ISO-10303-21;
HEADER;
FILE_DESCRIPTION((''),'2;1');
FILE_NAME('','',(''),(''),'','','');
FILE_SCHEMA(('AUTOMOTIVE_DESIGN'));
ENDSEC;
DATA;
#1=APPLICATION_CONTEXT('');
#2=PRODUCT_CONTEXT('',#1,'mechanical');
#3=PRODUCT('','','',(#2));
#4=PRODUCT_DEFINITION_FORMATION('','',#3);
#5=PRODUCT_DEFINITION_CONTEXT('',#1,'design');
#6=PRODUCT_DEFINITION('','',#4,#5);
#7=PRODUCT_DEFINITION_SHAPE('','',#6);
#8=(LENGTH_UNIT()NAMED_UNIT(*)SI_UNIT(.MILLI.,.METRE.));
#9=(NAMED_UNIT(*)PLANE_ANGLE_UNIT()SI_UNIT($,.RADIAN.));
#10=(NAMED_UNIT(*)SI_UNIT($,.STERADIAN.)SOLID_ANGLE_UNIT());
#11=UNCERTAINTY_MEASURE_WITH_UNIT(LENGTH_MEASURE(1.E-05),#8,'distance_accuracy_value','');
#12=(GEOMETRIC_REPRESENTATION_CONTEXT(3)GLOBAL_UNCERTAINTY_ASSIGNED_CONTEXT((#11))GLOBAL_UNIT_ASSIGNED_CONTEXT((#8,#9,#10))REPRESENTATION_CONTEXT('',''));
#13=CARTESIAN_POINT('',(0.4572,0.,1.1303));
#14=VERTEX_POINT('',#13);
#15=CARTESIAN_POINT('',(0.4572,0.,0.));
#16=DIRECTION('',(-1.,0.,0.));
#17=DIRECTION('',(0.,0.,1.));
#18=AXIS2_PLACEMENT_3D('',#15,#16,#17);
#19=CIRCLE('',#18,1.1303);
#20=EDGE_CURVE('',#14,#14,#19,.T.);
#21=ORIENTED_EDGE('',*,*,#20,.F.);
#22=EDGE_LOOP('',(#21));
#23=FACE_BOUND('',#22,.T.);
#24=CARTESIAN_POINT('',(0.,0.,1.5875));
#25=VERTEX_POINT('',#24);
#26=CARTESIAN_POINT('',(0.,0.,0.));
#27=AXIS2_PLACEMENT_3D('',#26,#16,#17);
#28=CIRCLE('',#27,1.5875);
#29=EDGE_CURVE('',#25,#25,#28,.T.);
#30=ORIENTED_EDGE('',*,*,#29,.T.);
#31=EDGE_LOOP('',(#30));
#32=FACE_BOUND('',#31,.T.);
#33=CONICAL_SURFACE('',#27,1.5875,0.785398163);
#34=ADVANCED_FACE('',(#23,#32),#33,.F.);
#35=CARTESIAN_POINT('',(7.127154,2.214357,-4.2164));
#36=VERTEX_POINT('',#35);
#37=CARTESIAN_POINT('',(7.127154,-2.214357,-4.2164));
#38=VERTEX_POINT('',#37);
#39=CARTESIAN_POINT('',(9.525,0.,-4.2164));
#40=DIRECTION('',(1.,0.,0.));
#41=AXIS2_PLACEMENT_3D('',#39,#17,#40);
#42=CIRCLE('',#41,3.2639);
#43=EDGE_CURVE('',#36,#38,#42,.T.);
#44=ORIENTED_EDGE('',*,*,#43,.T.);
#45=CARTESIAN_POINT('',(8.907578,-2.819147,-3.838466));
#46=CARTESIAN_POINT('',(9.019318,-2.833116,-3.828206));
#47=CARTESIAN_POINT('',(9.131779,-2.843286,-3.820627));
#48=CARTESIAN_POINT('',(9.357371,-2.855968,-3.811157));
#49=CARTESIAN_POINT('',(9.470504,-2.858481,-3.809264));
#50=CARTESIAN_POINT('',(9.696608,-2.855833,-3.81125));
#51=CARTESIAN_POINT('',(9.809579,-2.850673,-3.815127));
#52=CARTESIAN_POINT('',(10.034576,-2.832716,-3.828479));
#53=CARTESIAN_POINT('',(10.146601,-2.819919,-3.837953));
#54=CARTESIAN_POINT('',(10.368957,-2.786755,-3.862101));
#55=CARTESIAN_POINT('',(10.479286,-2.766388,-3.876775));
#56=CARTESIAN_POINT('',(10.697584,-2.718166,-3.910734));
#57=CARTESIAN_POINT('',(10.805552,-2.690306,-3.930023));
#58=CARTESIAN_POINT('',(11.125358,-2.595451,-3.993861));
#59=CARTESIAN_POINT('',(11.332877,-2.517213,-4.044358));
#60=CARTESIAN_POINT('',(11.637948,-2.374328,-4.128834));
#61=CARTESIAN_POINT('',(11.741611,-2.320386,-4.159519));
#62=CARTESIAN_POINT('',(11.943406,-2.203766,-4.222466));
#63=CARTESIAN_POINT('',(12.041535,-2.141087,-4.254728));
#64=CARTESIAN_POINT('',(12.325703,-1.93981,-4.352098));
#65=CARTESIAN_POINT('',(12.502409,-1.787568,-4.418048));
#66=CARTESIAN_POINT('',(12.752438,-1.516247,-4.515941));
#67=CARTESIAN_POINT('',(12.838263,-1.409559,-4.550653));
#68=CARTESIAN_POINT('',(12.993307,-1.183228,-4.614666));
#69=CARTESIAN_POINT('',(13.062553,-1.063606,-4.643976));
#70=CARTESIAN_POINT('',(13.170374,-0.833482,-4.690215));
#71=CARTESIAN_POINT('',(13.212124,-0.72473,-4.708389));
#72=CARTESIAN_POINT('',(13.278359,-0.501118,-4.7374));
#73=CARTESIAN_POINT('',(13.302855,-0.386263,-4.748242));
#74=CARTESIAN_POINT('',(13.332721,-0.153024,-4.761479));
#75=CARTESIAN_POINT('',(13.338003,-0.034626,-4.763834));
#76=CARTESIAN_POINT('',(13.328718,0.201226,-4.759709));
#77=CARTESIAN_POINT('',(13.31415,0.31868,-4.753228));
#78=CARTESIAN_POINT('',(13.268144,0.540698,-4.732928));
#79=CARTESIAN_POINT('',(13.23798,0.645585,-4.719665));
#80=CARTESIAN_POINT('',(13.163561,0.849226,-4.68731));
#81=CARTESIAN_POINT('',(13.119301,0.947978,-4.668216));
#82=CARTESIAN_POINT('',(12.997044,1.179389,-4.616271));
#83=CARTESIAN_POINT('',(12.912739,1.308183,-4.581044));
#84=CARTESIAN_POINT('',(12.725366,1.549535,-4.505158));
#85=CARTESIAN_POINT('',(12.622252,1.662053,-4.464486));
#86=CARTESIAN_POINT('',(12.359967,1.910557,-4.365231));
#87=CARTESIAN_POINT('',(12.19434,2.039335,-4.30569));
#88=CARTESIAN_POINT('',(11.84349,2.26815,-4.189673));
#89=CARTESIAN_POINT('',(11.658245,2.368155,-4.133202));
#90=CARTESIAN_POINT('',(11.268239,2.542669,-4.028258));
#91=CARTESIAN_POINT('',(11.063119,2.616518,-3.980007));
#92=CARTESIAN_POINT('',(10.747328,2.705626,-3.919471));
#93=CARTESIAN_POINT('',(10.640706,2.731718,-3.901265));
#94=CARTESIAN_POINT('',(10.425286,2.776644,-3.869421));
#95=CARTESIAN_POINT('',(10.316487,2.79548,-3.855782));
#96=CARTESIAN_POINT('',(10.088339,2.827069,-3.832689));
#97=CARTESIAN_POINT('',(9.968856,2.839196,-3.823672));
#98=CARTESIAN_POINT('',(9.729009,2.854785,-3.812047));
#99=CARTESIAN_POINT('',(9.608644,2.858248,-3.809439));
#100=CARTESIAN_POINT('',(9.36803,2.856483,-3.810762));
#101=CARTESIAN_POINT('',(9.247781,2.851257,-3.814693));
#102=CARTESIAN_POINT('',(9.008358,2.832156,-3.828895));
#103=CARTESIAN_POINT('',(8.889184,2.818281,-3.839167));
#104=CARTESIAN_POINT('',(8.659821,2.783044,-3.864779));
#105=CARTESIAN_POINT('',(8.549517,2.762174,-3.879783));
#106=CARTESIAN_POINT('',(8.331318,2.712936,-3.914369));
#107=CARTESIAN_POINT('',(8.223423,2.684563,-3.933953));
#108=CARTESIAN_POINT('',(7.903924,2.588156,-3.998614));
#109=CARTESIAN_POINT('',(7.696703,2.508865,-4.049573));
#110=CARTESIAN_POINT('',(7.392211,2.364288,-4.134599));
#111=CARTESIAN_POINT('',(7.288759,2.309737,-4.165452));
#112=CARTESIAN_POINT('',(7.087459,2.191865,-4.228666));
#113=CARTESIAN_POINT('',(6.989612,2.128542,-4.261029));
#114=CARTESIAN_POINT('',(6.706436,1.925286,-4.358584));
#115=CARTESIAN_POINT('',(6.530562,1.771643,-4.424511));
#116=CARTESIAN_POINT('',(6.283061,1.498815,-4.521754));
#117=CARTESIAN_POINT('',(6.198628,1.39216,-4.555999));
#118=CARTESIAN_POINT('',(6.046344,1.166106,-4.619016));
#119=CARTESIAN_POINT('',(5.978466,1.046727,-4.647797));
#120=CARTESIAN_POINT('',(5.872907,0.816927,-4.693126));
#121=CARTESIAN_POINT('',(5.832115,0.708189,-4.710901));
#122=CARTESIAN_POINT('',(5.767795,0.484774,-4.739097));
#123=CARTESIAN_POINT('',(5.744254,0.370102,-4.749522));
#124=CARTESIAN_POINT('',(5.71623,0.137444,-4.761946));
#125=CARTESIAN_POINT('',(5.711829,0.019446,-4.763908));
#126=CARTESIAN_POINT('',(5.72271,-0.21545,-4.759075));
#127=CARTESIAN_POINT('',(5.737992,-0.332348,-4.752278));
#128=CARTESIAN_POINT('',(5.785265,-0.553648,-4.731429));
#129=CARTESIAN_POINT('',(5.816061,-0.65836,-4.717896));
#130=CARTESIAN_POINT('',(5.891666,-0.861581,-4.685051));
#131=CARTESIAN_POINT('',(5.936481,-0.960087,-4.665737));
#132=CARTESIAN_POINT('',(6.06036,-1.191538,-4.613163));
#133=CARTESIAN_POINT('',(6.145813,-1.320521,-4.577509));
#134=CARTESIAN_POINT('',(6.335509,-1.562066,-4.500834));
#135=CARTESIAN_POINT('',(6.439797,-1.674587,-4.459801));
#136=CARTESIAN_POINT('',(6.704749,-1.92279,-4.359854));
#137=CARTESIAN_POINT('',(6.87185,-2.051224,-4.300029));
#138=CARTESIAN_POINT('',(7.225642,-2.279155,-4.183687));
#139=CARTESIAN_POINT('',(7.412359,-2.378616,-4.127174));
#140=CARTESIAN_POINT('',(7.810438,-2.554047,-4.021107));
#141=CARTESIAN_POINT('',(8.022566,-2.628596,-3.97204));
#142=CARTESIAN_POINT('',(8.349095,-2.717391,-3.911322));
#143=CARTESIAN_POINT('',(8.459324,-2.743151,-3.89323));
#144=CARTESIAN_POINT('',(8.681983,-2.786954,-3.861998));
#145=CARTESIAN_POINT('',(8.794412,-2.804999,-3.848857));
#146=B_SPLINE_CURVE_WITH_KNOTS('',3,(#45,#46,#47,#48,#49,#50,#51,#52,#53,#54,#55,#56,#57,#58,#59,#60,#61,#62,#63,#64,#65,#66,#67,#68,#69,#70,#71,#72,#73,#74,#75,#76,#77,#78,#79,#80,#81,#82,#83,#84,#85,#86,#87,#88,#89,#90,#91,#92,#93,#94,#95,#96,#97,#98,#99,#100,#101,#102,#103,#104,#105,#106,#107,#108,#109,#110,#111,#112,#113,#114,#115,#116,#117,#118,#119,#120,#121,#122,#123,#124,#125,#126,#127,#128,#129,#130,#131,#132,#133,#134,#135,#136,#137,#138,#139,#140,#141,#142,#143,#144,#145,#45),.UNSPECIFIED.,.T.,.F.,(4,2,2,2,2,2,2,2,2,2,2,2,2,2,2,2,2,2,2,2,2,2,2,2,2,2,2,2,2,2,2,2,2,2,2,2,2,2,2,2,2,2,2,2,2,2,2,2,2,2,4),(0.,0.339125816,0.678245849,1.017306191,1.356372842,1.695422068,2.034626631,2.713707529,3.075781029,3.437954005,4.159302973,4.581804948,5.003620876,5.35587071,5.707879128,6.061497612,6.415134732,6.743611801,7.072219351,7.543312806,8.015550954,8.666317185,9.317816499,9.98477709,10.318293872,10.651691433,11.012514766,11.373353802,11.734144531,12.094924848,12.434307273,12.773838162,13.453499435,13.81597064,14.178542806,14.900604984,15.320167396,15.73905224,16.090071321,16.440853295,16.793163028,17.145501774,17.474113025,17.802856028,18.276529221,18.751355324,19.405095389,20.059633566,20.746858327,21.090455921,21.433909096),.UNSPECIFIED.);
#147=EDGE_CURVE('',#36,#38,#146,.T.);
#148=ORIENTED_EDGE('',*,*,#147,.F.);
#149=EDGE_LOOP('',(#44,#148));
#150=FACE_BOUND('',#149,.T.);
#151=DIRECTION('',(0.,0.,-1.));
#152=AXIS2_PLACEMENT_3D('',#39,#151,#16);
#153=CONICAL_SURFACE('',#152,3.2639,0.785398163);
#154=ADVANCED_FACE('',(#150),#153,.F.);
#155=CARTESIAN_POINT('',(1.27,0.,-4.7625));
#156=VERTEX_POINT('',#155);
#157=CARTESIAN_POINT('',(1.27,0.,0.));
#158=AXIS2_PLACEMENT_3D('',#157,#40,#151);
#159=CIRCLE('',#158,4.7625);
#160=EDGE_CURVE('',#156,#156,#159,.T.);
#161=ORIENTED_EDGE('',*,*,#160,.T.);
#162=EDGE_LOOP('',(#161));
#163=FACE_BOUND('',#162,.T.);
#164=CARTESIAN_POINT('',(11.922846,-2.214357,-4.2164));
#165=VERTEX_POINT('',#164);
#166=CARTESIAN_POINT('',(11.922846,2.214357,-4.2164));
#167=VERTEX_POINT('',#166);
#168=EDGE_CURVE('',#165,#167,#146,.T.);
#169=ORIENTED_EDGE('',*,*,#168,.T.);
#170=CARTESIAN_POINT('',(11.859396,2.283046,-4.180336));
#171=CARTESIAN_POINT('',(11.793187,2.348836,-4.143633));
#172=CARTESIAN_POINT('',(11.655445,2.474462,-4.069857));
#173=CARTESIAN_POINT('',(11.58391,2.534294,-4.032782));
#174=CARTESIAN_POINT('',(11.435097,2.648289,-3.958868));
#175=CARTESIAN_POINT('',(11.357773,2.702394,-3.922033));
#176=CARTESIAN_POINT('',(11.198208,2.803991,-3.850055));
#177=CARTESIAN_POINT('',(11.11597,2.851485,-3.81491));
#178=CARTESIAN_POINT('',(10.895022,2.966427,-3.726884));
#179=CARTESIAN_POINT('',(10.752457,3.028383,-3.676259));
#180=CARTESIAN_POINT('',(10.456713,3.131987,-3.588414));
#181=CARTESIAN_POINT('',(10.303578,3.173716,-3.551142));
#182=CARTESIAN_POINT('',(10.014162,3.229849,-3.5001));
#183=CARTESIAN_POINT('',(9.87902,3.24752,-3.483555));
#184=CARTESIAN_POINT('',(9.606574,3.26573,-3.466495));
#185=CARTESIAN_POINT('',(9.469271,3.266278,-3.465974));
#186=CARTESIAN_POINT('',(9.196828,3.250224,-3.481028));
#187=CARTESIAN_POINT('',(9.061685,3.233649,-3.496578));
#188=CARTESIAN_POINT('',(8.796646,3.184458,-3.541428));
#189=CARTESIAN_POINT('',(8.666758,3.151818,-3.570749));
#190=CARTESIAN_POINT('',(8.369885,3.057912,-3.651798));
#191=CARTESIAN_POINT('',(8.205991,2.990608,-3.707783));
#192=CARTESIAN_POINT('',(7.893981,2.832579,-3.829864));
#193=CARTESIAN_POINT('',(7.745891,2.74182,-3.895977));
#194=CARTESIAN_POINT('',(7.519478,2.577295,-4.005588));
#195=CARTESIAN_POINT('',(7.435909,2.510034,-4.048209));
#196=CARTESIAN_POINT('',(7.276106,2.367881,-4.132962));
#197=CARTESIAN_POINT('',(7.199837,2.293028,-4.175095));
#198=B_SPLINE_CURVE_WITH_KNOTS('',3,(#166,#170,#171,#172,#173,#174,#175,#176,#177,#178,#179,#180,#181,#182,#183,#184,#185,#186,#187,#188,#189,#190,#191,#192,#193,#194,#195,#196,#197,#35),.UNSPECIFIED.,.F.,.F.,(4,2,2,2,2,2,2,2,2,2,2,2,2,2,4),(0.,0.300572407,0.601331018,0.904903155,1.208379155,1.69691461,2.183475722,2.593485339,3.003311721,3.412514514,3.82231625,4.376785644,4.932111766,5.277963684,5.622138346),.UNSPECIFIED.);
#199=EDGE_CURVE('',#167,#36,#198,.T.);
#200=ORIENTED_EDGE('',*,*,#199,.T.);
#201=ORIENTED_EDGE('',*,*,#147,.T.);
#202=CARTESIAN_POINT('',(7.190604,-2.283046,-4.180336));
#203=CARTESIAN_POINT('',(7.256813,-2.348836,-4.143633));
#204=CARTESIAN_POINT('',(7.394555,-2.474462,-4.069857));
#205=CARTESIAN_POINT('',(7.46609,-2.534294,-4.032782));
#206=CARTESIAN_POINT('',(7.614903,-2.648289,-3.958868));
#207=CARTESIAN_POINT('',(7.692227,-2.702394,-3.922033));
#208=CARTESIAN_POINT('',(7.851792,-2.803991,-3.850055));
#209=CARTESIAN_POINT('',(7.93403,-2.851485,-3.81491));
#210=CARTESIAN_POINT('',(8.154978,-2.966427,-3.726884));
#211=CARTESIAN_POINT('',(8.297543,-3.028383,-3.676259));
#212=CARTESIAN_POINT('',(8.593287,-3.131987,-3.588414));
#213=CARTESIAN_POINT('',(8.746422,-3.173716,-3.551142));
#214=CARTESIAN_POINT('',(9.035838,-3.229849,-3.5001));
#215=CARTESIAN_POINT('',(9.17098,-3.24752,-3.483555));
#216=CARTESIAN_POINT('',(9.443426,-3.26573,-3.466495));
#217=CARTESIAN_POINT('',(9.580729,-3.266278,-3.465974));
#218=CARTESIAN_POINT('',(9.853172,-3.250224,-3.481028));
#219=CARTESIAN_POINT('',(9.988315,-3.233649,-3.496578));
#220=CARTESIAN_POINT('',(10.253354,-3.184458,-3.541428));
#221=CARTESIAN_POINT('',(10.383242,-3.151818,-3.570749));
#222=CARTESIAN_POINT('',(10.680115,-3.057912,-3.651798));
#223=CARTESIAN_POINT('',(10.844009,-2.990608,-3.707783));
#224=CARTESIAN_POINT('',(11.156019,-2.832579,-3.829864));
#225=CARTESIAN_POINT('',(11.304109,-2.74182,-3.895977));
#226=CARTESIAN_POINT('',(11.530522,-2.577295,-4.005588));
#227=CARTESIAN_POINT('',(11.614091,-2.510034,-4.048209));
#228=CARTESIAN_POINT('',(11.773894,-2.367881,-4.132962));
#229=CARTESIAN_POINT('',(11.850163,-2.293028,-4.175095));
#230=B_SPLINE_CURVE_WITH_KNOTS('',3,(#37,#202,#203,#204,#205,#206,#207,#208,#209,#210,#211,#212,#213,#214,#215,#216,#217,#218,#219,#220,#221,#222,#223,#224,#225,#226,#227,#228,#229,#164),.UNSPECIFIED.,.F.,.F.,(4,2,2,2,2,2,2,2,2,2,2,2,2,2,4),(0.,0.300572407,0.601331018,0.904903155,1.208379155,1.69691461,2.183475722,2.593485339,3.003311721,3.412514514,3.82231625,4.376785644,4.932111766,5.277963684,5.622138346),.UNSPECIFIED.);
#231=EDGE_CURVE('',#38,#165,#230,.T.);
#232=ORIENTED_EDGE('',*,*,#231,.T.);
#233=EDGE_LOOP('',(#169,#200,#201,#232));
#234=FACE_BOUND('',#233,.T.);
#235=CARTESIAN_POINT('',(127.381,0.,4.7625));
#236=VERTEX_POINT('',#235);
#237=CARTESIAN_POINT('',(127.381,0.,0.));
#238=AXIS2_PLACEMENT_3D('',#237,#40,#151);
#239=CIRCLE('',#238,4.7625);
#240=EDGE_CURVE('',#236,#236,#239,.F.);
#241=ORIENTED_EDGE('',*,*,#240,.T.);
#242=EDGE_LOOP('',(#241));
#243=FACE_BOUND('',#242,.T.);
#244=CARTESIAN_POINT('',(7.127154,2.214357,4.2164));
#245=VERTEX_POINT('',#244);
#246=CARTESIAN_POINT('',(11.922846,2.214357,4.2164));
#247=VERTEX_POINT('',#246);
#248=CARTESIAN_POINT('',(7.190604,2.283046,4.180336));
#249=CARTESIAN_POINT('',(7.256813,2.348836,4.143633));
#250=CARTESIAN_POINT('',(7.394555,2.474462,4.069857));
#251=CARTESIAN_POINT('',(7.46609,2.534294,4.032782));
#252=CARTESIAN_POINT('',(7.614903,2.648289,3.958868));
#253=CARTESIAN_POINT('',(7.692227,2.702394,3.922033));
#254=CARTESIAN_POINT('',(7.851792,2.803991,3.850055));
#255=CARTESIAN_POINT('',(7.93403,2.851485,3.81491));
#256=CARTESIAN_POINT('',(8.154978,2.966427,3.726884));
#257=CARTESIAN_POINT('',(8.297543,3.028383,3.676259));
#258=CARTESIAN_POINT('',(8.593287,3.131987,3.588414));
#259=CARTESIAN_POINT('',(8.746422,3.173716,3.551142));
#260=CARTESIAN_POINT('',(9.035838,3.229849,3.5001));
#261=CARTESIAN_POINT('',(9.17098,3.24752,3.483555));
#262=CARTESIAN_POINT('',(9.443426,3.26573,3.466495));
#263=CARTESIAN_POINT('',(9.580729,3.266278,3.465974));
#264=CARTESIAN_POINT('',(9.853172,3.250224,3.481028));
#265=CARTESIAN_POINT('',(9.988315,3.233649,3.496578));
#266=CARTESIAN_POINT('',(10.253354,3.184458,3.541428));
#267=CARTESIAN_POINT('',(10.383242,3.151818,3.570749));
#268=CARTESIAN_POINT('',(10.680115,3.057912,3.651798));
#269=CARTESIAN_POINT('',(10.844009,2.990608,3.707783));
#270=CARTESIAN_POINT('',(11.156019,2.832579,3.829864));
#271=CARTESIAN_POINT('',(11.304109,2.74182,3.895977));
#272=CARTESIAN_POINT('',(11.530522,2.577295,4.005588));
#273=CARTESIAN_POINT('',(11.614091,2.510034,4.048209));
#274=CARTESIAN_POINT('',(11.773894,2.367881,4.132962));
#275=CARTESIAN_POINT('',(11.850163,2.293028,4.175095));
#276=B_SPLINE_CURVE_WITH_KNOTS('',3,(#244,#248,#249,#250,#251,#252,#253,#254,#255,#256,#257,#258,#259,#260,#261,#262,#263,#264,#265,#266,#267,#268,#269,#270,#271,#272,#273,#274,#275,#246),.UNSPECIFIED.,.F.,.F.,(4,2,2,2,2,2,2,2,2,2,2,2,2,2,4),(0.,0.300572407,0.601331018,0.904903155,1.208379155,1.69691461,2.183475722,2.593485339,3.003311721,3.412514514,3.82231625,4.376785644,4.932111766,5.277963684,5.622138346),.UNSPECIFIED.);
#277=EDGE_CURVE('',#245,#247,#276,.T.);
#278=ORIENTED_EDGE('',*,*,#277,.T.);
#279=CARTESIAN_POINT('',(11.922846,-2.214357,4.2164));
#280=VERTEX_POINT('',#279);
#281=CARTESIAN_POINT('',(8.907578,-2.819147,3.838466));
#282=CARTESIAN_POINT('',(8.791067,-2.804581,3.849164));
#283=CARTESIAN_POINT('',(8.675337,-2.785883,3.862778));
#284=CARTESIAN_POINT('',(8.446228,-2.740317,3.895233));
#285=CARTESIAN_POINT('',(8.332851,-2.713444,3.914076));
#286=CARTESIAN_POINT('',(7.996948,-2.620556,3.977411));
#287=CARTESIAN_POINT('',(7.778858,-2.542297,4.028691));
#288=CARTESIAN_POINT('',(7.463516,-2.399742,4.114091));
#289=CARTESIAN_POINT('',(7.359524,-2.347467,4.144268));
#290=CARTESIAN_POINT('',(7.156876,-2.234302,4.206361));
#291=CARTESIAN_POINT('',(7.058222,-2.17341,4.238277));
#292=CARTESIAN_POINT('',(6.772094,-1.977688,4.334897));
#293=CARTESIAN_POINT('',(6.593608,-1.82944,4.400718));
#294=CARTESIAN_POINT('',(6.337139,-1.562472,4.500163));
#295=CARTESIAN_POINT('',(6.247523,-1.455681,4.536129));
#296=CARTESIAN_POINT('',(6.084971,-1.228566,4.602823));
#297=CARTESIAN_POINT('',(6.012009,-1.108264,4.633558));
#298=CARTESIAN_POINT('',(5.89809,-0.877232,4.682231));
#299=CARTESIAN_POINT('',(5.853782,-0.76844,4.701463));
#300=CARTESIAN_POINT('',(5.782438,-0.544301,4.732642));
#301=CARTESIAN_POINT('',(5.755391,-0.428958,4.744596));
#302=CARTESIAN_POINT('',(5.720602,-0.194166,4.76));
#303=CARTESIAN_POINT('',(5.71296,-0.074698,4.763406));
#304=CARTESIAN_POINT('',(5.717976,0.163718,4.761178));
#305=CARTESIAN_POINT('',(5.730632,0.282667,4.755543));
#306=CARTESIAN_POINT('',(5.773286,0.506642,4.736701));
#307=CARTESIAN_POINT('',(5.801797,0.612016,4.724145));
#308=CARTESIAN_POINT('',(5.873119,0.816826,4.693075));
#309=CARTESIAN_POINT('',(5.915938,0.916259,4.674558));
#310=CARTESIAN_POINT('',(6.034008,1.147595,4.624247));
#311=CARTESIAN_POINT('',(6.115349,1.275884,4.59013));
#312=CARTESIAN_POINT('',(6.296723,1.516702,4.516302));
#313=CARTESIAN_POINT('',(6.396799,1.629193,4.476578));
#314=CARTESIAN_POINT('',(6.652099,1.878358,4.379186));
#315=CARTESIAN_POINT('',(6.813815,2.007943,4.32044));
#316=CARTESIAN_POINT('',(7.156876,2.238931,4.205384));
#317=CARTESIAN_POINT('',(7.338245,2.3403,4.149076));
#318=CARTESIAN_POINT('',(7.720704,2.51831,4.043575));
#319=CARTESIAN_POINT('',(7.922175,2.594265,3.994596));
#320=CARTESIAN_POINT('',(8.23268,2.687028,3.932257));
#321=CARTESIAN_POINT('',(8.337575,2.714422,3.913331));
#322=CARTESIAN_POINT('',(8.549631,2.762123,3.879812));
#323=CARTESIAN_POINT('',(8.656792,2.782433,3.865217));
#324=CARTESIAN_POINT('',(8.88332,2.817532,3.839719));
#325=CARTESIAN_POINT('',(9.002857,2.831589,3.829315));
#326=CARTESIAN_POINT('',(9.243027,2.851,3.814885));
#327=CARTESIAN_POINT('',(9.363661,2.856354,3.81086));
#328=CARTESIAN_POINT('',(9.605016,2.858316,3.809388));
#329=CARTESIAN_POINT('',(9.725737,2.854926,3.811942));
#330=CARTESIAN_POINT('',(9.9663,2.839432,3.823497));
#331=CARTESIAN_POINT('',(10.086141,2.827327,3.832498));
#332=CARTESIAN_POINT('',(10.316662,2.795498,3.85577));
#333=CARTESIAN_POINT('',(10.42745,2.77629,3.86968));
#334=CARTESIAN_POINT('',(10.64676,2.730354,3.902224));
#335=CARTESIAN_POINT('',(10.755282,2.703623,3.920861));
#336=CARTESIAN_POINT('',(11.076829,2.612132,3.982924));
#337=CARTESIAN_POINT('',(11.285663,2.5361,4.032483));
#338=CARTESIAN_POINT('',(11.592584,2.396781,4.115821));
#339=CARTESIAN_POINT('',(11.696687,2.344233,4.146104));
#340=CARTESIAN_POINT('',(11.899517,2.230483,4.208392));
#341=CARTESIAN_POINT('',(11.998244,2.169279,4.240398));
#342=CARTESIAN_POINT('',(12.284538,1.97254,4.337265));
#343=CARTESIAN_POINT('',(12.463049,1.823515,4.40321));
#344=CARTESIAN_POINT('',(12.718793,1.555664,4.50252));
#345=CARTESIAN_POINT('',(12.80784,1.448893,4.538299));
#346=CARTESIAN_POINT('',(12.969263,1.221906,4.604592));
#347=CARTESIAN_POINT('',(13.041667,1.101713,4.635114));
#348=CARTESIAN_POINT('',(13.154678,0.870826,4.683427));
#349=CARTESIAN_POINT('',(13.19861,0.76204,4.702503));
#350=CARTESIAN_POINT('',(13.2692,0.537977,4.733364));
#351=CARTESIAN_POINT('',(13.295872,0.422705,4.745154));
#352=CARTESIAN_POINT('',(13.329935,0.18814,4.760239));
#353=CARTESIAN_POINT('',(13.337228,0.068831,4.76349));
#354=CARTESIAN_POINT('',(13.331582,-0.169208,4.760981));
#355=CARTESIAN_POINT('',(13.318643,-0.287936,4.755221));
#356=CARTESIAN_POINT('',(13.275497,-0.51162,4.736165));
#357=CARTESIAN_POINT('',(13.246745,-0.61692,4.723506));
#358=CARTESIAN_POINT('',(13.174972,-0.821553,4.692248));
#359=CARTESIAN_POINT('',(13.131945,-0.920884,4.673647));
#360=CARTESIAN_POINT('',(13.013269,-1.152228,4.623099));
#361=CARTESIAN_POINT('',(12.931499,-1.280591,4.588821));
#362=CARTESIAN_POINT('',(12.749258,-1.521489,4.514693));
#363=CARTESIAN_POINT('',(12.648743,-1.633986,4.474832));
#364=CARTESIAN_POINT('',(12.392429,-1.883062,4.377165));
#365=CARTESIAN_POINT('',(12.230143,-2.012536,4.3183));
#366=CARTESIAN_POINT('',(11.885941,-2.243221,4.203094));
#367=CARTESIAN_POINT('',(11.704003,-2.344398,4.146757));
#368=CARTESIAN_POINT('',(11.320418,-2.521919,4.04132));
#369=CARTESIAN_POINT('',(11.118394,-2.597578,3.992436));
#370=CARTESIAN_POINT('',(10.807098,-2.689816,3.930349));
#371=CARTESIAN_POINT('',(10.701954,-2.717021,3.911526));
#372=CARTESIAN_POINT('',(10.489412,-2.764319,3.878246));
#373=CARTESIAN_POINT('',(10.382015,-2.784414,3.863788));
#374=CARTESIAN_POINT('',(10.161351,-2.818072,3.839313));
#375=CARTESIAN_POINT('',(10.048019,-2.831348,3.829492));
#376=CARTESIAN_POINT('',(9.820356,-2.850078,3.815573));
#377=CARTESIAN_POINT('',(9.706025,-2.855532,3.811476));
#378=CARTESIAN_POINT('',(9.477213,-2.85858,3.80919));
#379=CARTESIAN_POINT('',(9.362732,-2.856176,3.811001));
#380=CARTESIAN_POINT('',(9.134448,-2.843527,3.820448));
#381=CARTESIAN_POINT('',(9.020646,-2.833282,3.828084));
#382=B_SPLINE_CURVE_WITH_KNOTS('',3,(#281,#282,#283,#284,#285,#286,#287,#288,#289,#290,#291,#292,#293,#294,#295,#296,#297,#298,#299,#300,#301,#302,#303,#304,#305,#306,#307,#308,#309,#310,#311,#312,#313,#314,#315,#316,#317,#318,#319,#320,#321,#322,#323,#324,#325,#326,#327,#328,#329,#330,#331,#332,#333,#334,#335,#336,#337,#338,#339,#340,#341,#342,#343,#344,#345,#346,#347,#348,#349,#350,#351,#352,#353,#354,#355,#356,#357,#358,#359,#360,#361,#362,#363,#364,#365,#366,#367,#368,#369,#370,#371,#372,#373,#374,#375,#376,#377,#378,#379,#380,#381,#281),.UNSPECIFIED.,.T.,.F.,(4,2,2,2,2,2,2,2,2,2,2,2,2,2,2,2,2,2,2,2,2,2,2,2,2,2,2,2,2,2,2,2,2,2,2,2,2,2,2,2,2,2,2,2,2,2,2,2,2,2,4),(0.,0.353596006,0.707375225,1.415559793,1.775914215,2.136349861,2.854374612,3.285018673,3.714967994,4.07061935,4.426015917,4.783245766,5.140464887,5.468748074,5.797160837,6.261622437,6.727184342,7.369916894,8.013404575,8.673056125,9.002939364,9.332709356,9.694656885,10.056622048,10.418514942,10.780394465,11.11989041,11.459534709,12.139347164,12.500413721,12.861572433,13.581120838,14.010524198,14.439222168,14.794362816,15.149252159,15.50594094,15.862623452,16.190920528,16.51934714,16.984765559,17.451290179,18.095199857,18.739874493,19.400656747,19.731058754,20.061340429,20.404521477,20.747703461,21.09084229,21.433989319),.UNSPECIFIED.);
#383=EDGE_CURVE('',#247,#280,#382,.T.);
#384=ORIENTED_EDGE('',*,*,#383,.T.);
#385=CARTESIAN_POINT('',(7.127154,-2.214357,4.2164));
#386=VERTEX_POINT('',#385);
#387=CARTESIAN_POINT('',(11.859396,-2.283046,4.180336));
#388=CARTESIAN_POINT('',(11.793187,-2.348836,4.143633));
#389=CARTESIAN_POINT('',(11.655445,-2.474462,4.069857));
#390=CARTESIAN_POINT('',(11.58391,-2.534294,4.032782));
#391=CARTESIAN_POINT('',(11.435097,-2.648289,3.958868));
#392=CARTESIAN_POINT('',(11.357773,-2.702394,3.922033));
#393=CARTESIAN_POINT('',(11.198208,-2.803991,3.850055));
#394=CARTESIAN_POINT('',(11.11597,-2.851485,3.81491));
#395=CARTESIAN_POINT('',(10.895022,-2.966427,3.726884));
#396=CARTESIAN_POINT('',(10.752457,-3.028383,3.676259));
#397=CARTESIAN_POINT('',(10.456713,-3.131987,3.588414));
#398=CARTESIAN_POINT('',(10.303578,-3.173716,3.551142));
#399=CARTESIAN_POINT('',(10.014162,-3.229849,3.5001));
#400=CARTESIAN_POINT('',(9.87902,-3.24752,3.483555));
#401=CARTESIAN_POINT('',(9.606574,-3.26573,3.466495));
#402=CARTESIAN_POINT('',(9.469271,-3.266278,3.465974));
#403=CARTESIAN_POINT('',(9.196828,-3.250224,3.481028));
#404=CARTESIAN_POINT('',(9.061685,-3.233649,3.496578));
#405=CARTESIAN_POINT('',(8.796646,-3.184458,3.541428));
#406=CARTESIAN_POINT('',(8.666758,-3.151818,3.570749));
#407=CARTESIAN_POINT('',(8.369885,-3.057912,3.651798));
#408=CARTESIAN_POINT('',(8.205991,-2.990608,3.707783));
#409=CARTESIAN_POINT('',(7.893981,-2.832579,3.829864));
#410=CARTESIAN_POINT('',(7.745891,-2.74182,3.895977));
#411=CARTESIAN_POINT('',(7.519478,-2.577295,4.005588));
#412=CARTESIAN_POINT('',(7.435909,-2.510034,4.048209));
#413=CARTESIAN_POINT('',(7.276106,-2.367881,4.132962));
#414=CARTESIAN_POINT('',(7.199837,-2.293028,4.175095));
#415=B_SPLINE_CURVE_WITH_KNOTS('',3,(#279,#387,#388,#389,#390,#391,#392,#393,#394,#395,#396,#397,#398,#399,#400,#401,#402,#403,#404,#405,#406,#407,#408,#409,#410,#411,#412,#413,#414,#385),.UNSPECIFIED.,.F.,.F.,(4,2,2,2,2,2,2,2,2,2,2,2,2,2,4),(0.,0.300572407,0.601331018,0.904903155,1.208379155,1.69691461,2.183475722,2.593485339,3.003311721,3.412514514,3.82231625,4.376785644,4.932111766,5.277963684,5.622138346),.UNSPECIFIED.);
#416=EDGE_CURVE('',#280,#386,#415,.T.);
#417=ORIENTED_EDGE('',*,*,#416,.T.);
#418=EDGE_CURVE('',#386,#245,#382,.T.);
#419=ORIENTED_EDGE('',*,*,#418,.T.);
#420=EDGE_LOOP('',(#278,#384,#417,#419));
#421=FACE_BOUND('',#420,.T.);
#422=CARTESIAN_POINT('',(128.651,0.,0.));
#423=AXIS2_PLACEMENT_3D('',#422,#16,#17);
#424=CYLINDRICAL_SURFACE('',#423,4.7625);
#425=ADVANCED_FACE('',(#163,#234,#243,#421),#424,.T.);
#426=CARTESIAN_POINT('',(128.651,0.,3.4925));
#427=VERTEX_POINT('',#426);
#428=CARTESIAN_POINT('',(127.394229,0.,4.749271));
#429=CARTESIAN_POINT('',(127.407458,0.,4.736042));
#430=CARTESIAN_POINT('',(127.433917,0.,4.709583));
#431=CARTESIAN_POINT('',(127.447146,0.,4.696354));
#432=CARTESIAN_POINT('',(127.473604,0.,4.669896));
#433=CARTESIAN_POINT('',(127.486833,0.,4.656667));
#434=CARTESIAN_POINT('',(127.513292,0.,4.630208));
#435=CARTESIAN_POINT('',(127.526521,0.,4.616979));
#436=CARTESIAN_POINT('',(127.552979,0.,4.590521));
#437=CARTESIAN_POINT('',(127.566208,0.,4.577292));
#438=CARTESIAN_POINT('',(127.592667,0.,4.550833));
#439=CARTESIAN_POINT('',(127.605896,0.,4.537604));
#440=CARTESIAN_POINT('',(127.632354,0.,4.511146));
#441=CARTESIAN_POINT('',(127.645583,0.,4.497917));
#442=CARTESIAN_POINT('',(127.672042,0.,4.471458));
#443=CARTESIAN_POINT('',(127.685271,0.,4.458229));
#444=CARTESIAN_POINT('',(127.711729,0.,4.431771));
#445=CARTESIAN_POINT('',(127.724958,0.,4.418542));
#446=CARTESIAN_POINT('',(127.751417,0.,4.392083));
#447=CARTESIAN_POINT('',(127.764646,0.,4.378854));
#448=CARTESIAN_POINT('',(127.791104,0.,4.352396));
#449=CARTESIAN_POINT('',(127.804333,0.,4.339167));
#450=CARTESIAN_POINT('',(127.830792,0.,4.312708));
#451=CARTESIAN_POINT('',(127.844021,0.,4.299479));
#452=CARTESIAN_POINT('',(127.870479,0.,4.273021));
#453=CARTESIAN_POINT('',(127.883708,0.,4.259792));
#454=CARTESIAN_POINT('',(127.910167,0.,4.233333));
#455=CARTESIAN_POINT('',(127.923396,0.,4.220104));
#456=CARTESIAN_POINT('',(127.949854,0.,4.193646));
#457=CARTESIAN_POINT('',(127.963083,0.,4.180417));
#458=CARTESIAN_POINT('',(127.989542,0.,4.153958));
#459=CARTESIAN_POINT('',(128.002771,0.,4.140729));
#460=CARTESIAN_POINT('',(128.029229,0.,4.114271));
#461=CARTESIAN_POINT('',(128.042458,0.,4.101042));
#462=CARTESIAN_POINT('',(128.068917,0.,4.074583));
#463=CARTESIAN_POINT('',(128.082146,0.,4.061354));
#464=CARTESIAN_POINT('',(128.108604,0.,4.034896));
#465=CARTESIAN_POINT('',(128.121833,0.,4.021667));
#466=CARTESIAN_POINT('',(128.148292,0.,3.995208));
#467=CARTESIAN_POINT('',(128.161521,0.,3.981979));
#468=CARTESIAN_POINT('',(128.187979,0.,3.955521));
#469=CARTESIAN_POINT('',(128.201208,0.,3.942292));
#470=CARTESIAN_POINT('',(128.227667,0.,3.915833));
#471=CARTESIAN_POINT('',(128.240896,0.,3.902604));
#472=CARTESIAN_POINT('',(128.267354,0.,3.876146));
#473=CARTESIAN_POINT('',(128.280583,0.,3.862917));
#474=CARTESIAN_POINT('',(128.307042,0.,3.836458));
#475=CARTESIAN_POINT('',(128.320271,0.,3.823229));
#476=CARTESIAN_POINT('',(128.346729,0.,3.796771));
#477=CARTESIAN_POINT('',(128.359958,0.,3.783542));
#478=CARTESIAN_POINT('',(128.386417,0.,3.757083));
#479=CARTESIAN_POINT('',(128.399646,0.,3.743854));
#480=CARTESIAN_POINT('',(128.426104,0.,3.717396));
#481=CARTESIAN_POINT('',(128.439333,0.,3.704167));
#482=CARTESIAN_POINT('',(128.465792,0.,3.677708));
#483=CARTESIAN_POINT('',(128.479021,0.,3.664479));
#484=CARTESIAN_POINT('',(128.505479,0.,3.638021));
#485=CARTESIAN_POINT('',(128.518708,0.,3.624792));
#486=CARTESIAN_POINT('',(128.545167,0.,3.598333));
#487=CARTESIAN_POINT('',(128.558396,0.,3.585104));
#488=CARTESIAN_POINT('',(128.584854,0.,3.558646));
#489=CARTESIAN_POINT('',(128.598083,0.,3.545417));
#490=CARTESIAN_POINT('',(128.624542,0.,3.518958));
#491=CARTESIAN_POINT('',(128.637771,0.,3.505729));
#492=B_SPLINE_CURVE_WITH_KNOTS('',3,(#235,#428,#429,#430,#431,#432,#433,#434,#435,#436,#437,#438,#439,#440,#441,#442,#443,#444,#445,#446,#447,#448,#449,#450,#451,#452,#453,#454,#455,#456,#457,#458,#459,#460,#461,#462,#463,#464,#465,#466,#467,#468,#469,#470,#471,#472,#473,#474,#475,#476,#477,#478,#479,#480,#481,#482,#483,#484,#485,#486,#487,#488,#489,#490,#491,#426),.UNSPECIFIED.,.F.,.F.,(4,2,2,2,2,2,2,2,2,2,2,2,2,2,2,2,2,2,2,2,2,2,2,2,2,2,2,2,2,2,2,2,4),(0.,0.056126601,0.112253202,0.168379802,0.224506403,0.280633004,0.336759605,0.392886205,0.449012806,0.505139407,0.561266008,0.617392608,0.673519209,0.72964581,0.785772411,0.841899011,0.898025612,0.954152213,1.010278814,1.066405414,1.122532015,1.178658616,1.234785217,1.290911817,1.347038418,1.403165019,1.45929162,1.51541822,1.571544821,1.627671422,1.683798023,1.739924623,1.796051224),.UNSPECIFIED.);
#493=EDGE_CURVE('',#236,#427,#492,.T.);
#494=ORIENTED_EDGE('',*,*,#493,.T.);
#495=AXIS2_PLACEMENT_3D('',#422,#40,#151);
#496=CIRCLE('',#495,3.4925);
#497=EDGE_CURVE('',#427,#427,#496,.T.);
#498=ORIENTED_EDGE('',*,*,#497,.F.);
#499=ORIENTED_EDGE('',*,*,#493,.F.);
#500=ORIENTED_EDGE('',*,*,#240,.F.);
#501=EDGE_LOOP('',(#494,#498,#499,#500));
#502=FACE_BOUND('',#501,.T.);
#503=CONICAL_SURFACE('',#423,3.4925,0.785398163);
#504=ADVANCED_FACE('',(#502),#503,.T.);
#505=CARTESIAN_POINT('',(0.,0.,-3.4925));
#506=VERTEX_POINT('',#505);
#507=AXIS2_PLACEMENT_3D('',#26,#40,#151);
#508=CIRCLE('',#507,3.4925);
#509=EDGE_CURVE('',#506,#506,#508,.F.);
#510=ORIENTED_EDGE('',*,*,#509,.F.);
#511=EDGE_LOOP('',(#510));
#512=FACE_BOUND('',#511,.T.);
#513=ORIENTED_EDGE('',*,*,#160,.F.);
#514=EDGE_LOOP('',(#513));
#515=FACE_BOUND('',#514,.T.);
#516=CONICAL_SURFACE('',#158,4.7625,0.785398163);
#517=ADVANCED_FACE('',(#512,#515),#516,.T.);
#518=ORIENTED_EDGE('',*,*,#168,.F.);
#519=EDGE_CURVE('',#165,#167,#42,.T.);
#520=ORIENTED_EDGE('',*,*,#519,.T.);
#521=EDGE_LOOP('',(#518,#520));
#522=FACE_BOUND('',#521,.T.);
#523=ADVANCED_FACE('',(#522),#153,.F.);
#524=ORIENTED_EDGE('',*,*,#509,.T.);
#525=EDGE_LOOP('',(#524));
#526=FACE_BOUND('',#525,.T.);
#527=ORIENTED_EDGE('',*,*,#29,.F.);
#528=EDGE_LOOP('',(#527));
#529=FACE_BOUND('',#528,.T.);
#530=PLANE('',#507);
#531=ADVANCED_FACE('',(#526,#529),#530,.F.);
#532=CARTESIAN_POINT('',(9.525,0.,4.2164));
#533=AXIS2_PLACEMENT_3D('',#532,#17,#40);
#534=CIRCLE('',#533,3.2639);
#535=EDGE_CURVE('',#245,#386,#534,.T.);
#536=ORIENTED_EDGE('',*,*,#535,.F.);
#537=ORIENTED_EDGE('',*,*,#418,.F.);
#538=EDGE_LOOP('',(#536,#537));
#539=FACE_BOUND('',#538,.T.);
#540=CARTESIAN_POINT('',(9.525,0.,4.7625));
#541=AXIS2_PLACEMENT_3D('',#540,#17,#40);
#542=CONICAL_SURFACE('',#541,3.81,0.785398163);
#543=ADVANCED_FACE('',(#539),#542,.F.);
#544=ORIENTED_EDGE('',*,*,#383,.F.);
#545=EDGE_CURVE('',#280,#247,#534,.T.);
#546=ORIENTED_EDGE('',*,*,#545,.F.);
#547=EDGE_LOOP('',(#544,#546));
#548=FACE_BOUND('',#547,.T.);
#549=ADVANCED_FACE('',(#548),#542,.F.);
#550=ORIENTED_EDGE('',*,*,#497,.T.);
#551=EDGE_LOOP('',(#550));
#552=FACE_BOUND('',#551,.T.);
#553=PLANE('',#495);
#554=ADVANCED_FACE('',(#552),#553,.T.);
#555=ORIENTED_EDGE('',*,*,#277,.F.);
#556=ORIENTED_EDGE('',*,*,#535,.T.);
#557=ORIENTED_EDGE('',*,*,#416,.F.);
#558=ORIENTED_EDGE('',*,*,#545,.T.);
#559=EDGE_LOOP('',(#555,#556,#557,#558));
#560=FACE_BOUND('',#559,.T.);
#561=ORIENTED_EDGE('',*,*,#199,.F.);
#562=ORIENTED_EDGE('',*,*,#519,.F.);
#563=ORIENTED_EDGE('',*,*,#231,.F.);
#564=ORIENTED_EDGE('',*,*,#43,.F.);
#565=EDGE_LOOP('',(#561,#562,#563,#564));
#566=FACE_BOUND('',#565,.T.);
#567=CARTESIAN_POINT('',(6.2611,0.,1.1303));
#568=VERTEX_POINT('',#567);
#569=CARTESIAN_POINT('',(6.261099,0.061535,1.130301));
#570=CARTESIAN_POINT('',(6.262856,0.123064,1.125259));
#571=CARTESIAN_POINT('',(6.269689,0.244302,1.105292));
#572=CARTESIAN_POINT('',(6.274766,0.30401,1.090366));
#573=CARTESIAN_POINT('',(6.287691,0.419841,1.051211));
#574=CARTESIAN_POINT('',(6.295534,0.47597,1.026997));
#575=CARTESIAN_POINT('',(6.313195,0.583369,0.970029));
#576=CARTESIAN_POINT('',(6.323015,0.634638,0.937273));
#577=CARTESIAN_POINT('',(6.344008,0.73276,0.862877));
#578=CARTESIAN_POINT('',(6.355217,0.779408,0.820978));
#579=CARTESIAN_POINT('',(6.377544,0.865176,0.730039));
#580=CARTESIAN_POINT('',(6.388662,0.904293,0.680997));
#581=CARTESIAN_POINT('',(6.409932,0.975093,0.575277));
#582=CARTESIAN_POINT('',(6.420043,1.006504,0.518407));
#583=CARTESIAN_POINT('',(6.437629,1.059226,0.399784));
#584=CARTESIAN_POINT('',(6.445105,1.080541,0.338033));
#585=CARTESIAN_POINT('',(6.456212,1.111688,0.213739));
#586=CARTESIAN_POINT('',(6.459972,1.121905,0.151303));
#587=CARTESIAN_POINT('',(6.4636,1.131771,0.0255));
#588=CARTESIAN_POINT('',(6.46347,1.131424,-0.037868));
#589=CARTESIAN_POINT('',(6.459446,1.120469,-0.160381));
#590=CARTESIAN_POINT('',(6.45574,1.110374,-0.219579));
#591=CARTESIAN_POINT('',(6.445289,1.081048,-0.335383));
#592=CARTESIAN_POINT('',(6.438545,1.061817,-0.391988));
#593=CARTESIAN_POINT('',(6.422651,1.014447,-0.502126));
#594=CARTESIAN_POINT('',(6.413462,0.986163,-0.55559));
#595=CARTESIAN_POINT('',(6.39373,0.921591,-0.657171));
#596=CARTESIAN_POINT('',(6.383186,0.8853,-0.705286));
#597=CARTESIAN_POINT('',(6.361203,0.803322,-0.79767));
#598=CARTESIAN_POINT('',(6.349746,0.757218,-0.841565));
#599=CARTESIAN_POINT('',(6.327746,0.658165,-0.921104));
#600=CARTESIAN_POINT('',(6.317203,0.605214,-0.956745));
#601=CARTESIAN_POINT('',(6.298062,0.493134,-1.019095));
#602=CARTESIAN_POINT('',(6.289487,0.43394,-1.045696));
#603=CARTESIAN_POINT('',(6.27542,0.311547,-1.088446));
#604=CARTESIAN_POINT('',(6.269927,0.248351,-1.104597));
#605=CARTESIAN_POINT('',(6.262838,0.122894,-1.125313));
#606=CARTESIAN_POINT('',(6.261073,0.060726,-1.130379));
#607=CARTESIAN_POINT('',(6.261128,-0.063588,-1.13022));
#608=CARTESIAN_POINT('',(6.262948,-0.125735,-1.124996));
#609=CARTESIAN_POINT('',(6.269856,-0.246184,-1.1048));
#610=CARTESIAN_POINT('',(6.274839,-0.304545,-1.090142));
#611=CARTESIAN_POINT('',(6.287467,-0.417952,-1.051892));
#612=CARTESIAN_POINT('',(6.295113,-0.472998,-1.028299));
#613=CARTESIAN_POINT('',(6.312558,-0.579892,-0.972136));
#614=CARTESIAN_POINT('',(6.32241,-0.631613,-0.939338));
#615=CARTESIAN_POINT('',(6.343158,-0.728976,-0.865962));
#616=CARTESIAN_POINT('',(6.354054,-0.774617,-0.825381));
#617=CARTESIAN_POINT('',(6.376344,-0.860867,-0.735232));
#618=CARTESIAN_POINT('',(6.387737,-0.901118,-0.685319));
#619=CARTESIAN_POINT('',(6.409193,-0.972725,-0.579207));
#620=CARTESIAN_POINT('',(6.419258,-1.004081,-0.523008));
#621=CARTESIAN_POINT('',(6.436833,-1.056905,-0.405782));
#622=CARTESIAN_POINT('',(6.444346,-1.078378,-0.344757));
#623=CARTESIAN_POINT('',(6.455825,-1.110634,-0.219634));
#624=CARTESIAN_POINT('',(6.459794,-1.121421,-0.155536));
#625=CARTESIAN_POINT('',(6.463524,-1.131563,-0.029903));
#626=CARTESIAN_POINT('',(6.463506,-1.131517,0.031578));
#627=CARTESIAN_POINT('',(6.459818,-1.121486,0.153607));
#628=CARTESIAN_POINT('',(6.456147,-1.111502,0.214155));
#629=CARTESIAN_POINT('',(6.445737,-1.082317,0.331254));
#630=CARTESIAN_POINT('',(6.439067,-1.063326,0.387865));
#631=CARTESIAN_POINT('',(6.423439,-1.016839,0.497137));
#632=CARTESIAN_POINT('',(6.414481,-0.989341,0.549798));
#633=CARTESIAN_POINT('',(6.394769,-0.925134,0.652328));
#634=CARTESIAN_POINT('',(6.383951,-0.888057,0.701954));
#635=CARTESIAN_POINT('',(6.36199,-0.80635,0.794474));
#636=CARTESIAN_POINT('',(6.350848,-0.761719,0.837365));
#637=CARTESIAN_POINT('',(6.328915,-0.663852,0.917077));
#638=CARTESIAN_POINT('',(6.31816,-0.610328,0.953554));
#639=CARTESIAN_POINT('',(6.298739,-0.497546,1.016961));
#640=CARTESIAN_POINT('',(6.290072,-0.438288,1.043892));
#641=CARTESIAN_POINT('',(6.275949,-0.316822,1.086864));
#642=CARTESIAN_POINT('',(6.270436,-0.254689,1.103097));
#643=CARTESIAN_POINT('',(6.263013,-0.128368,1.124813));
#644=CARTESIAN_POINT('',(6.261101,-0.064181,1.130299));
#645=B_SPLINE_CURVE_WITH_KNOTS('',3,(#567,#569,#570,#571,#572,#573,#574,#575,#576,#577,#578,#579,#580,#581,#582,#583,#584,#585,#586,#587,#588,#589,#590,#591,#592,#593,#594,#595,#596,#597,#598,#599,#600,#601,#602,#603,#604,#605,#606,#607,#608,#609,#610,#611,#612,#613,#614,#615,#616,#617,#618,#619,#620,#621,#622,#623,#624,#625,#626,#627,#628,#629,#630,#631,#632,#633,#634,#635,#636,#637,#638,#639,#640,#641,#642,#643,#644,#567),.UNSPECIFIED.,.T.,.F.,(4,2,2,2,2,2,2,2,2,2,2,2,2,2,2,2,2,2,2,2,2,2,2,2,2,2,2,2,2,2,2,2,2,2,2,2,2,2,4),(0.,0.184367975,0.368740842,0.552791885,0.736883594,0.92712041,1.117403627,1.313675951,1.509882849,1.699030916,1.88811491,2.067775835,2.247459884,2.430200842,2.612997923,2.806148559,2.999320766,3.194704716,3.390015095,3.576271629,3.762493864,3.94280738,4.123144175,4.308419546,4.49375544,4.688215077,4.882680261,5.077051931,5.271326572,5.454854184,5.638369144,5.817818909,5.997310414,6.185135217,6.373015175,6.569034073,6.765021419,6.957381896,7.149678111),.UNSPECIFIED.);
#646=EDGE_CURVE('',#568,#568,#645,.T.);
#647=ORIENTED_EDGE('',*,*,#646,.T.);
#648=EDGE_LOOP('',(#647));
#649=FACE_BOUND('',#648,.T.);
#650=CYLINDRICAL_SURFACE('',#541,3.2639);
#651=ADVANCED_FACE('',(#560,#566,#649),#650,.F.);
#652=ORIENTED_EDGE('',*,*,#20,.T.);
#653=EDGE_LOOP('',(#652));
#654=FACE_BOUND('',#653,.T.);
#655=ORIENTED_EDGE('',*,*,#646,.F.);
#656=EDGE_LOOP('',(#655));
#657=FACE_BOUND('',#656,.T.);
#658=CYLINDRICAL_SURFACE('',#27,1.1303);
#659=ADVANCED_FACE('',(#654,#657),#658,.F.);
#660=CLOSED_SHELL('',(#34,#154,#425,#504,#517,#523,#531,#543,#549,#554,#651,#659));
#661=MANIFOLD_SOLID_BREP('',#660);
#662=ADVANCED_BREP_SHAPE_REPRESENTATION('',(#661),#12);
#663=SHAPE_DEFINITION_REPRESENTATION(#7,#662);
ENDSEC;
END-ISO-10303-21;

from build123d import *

# Parameters (mm, degrees)
SKETCH2_R           = 4.7625
BOSS_EXTRUDE1_DEPTH = 128.651
CHAMFER1_SIZE       = 1.27


# Read off the part's stored shape, not the designer's step: #4-40 Tapped Hole1
with BuildPart() as part:
    # Sketch2 → Boss-Extrude1 (new body)
    with BuildSketch(Plane(origin=(0, 0, 0), x_dir=(0, 0, -1), z_dir=(1, 0, 0))):
        with Locations(Location((0, 0, 0), (0, 0, 180))):
            Circle(SKETCH2_R)
    extrude(amount=BOSS_EXTRUDE1_DEPTH)

    # Chamfer1
    chamfer1_edges = [part.edges().sort_by_distance(p)[0] for p in [
        (0, 0, -4.7625),
        (128.651, 0, -4.7625),
    ]]
    chamfer(chamfer1_edges, length=CHAMFER1_SIZE)

    # Sketch9 → F (0.257) Diameter Hole2 (revolve, cut)
    with BuildSketch(Plane(origin=(9.525, 0, 4.7625), x_dir=(0, -1, 0), z_dir=(1, 0, 0))):
        Polygon((0, 0), (0, 9.525), (3.81, 9.525), (3.2639, 8.9789), (3.2639, 0.5461), (3.81, 0), align=None)
    revolve(axis=Axis((9.525, 0, 11.1125), (0, 0, -1)), mode=Mode.SUBTRACT)

    # #4-40 Tapped Hole1 outline → #4-40 Tapped Hole1 (revolve, cut)
    with BuildSketch(Plane.YX):
        Polygon((1.1303, 0.4572), (1.1303, 6.463087607), (0, 6.463087607), (0, 0), (1.5875, 0), align=None)
    revolve(axis=Axis((0, 0, 0), (1, 0, 0)), mode=Mode.SUBTRACT)


solid = part.part
